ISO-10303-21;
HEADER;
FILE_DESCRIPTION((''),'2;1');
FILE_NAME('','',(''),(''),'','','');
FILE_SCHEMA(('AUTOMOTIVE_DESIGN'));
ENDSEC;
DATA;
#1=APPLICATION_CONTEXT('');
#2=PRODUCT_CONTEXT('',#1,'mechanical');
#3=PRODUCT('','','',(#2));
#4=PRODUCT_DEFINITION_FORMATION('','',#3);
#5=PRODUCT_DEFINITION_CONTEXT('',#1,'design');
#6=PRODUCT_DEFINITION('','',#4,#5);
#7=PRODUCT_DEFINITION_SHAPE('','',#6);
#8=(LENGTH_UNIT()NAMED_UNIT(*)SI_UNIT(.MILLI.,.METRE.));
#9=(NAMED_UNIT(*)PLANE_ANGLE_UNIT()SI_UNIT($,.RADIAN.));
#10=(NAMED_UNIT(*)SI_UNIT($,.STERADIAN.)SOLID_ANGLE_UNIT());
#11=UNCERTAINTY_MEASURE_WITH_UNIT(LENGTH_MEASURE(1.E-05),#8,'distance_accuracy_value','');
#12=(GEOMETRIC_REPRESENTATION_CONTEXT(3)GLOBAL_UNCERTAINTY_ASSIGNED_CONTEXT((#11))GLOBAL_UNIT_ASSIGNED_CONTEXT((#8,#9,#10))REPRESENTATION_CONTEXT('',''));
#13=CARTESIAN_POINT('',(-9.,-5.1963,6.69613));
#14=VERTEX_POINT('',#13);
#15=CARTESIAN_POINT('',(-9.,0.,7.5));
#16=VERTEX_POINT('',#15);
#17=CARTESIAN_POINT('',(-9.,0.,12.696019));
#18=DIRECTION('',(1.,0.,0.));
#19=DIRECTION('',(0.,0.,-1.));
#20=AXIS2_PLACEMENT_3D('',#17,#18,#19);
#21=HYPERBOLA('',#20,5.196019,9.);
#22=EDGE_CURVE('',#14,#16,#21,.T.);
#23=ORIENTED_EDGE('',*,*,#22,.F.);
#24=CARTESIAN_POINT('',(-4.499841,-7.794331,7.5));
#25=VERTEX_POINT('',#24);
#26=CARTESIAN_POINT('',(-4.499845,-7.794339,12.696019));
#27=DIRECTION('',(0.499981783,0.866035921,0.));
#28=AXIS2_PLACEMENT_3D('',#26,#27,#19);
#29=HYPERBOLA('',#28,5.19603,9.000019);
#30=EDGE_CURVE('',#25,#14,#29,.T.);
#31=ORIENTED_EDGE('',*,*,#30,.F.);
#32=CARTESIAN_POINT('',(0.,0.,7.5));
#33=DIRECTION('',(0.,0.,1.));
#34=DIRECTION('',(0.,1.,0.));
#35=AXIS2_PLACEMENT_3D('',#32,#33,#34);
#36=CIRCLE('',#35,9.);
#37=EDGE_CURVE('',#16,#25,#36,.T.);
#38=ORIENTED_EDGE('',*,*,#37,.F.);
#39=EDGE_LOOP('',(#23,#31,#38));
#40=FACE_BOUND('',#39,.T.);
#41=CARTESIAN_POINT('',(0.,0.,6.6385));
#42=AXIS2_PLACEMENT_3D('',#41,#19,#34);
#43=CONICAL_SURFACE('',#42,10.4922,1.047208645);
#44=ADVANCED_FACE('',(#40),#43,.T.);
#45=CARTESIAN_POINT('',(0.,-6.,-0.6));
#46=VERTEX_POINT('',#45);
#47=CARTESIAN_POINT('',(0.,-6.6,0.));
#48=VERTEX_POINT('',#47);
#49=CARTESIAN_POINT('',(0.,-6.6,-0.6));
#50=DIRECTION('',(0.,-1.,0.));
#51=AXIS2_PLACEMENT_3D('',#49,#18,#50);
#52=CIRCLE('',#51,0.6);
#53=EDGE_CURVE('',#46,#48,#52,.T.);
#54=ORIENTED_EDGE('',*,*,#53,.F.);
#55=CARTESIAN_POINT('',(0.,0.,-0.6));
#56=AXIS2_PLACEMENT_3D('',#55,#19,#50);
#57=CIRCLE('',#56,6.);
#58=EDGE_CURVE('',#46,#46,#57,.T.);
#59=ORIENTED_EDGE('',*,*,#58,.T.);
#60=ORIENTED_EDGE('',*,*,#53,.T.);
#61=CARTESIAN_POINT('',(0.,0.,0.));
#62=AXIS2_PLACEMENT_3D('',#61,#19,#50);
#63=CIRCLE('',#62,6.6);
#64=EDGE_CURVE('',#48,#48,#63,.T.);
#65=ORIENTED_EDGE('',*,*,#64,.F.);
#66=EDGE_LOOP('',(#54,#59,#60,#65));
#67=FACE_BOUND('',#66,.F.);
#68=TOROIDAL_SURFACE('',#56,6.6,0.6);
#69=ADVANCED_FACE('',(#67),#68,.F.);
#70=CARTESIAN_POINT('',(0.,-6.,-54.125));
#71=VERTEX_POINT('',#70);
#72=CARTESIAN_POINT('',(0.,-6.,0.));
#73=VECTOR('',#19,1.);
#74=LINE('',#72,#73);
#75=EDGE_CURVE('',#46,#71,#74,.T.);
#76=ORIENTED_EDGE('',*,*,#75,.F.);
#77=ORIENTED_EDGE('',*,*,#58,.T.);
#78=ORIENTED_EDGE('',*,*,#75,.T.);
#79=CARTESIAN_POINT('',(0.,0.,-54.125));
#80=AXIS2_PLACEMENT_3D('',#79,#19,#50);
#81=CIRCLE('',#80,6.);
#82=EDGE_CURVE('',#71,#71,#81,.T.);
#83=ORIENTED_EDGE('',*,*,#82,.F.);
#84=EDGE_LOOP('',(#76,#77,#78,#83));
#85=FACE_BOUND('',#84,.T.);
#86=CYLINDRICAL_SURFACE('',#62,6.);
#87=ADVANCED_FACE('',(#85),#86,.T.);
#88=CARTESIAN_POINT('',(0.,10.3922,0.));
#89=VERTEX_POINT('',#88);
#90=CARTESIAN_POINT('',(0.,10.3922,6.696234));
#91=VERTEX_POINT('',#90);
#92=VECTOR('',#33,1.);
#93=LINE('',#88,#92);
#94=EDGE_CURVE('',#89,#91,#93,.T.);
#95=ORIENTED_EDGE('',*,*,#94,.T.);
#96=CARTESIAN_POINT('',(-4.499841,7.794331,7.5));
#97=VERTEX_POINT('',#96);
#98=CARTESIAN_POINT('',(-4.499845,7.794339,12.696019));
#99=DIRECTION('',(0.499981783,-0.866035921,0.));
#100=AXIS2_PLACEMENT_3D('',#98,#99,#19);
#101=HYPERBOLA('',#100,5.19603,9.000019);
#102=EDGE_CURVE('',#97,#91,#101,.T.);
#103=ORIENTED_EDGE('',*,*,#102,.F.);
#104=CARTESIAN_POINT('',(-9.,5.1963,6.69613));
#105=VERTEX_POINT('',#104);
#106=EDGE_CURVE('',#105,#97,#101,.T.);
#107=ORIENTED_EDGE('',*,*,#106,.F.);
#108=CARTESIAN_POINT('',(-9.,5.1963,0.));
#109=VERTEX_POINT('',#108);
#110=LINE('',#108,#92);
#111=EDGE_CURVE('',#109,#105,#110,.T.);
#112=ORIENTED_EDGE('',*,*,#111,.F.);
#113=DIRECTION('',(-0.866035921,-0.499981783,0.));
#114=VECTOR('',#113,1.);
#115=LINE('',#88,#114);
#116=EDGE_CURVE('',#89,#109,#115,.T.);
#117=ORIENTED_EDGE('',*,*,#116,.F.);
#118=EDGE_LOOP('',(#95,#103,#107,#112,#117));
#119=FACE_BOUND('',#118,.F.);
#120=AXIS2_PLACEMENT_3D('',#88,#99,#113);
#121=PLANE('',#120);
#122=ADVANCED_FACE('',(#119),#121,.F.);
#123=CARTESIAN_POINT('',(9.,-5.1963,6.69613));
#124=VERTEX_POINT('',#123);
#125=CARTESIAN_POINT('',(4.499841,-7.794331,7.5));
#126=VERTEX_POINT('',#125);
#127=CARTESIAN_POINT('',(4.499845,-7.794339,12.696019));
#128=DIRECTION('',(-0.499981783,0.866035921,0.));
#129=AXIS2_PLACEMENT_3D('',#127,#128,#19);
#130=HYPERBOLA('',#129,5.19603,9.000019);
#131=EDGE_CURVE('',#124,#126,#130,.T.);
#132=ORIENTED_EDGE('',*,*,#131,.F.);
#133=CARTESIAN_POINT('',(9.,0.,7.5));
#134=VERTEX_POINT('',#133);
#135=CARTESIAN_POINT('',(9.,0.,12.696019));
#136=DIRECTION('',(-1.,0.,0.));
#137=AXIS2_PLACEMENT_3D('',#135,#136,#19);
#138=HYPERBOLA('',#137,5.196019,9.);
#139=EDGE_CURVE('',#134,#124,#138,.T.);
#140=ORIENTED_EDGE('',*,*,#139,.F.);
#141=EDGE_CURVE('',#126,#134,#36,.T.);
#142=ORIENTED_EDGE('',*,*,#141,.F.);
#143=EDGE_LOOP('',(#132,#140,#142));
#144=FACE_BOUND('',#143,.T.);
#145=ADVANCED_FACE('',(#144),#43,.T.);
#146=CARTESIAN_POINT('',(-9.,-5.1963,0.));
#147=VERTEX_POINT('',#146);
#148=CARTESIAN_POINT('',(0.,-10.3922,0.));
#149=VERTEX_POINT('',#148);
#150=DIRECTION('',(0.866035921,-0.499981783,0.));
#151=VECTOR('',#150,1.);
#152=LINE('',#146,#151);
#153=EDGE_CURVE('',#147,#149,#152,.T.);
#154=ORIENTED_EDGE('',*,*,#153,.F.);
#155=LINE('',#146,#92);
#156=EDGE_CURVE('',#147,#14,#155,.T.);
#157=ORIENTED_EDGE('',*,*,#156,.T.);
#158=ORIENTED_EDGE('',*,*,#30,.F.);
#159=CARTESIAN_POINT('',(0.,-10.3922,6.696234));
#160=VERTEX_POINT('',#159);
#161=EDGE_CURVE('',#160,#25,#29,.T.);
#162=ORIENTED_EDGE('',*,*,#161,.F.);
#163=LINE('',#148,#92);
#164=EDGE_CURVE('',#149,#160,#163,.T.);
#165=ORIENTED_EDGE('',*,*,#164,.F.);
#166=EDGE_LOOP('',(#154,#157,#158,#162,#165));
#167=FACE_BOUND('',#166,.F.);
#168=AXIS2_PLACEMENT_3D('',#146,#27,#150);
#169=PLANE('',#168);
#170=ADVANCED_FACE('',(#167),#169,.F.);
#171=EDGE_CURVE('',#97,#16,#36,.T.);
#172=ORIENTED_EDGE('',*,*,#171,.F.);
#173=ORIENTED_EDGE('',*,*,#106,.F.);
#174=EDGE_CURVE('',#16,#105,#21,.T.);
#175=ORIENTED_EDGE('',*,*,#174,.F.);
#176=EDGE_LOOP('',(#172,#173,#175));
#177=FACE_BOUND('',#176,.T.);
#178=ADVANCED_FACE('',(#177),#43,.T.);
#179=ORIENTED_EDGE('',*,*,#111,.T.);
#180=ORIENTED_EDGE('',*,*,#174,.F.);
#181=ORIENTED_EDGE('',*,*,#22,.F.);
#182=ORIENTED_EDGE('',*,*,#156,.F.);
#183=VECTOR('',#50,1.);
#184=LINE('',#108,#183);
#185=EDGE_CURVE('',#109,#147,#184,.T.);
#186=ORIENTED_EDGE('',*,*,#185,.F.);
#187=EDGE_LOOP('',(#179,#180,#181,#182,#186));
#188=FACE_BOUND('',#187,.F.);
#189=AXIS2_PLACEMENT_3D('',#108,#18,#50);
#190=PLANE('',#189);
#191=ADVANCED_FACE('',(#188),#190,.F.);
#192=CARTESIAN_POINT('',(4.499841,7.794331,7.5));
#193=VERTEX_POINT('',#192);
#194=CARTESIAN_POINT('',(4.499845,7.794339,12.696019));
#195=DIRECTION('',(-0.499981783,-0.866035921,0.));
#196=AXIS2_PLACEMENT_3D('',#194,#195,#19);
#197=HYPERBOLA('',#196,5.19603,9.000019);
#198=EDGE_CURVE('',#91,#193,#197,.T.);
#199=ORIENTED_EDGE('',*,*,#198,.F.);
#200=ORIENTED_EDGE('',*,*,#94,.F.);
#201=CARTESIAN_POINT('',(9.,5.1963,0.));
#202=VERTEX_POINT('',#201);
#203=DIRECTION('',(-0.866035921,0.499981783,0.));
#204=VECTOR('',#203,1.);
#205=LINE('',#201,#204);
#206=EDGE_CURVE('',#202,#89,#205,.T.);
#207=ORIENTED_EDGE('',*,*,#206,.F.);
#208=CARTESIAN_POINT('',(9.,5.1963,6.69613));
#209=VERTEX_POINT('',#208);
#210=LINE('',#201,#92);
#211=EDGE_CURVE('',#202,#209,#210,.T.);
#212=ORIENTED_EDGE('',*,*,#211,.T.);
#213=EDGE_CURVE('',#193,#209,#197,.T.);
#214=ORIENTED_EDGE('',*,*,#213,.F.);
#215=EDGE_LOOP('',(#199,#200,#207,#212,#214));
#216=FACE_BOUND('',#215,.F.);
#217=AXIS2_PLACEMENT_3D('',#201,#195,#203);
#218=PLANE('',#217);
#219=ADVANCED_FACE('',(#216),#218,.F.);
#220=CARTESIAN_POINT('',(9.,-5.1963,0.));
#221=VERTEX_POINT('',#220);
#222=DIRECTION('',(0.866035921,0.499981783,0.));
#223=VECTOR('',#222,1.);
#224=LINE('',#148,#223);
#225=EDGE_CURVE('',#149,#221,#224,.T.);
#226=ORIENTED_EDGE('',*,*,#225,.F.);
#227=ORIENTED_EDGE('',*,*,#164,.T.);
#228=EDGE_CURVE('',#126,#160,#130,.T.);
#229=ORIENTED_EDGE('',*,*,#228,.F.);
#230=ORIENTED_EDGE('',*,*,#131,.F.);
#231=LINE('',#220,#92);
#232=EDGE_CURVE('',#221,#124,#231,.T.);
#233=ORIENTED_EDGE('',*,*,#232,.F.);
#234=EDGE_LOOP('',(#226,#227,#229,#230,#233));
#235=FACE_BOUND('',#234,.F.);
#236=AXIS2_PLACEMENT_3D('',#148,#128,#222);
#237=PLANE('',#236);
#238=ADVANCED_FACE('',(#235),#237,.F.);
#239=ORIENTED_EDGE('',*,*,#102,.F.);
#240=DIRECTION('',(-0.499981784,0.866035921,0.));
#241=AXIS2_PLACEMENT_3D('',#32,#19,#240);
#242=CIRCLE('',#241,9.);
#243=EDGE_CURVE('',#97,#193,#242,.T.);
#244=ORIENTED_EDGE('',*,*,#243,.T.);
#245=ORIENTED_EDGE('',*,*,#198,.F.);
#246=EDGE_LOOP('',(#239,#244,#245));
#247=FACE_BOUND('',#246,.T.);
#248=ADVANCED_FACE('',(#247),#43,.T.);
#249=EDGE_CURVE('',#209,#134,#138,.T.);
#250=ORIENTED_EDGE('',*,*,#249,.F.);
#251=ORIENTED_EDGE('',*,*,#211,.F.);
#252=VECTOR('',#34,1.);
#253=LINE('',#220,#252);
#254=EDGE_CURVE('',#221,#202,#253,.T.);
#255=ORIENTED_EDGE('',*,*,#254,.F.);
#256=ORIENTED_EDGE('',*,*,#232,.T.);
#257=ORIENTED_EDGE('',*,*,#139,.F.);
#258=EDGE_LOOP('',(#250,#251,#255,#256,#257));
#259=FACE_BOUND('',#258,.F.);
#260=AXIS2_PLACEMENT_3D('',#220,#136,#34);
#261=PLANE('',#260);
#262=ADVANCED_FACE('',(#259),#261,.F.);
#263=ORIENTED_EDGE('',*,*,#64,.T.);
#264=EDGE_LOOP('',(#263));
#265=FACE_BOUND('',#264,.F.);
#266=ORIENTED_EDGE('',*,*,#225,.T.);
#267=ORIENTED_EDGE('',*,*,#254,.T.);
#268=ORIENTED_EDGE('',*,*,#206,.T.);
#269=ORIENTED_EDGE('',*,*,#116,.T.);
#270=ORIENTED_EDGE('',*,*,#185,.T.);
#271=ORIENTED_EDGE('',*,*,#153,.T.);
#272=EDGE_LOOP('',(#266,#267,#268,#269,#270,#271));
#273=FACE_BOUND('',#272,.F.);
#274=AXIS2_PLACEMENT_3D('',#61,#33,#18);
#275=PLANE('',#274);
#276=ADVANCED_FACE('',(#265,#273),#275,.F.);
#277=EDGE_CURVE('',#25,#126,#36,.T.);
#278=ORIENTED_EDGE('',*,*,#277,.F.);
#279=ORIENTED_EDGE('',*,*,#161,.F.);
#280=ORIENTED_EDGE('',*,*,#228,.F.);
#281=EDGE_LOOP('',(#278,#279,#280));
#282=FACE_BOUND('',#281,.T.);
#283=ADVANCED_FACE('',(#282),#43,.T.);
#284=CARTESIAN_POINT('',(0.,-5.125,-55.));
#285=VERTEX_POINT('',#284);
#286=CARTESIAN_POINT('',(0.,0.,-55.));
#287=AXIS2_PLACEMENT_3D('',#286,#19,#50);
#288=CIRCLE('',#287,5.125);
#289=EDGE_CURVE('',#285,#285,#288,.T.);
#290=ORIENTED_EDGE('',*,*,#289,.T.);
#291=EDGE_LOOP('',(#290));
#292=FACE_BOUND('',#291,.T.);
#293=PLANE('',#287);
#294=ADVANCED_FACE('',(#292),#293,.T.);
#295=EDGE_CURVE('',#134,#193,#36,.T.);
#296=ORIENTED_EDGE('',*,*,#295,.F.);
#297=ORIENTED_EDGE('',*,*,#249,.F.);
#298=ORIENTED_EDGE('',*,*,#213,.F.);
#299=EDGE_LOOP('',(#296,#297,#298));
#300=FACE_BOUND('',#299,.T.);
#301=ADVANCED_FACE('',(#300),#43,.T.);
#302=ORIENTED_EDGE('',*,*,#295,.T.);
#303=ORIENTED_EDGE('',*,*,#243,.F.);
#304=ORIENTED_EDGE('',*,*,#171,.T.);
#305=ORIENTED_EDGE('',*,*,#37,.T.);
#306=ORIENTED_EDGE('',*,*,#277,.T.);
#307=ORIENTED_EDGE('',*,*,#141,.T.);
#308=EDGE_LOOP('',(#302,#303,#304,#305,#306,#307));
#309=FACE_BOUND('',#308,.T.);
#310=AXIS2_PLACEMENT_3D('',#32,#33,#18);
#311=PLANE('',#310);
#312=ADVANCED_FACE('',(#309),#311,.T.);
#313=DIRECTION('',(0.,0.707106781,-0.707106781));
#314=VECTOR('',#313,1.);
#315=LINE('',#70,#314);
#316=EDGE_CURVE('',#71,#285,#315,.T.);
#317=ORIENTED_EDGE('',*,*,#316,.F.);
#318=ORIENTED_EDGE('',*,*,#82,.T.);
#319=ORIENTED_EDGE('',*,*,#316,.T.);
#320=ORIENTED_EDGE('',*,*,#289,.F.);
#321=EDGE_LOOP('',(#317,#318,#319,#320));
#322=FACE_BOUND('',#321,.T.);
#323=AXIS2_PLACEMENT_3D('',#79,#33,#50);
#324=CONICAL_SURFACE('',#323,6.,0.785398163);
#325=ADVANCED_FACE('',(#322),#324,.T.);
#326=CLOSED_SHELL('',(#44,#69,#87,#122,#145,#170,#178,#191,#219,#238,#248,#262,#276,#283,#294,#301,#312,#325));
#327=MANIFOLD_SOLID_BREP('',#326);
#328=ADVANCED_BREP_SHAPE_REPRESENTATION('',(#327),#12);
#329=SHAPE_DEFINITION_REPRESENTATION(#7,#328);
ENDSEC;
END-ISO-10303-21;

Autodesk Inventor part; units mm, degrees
ref_plane "WorkPlane1" through (0, 0, 0) normal (0, 0, 1) x (1, 0, 0)
sketch "Skizze1" plane through (0, 0, 0) normal (0, 0, 1) x (1, 0, 0)
  point P0 (0, 0)
sketch "Skizze2" plane through (0, 0, 0) normal (0, 0, 1) x (1, 0, 0)
  line L0 (-9, 5.1963) -> (-9, -5.1963)
  line L1 (0, 10.3922) -> (-9, 5.1963)
  line L2 (9, 5.1963) -> (0, 10.3922)
  line L3 (9, -5.1963) -> (9, 5.1963)
  line L4 (0, -10.3922) -> (9, -5.1963)
  line L5 (-9, -5.1963) -> (0, -10.3922)
  circle A0 centre (0, 0) radius 9 construction
  dimension "d1" = 18
  dimension "d29" = 0
  dimension "d30" = 0
extrude "Extrusion1" add sketch "Skizze2" along normal blind 7.5
sketch "Skizze3" plane through (0, 0, 0) normal (1, 0, 0) x (0, 1, 0)
  line L0 (9, 7.5) -> (10.4922, 7.5)
  line L1 (10.4922, 6.6385) -> (9, 7.5)
  line L2 (10.4922, 7.5) -> (10.4922, 6.6385)
  line L3 (0, -1.5) -> (0, 9) projected
  line L4 (10.3922, 0) -> (10.3922, 7.5) projected
  dimension "d25" = 0.1
  dimension "d26" = 0
  dimension "d27" = 60
  dimension "d28" = 9
revolve "Drehung1" cut sketch "Skizze3" angle 360 about axis through (0, 0, -10) along (0, 0, 1)
sketch "Skizze4" plane through (0, 0, 0) normal (1, 0, 0) x (0, 1, 0)
  line L0 (0, -55) -> (0, 0)
  line L1 (-6, -55) -> (0, -55)
  line L2 (-6, 0) -> (-6, -55)
  line L3 (0, 0) -> (-6, 0)
  line L4 (0, -55) -> (0, 0)
  line L5 (-7.2, 0) -> (1.2, 0) projected
  line L6 (0, -66) -> (0, 11) projected
  dimension "d18" = 6
  dimension "d20" = 55
  dimension "d33" = 0
  dimension "d34" = 0
revolve "Drehung2" add sketch "Skizze4" angle 360 about axis through (0, 0, -55) along (0, 0, -1)
chamfer "Fase1" distance 0.875 angle 45 1 edges at (0, 6, -55)
fillet "Rundung1" radius 0.6 1 edges at (0, 6, 0)
thread "Gewinde1" size "M12x1.75" class "6g" standard "ISO Metric profile" length 30
ref_plane "MSC_PF1" through (0, 0, 0) normal (1, 0, 0) x (0, 1, 0)
ref_plane "MSC_PT1" through (0, 0, 0) normal (0, 0, -1) x (-1, 0, 0)
equation "\"d22\" = 0.5 * PTC"
equation "\"d23\" = 0.5 * PTC"
equation "\"d1\" = ParS"
equation "\"d6\" = ParK"
equation "\"d24\" = r"
equation "\"d28\" = 0.5 * ParS"
equation "\"d18\" = 0.5 * NND"
equation "\"d20\" = NLG"
equation "\"NND\" = 12"
equation "\"NLG\" = 55"
equation "\"PTC\" = 1.75"
equation "\"ParK\" = 7.5"
equation "\"ParS\" = 18"
equation "\"msp_es\" = 0.577367 * ParS"
equation "\"r\" = 0.6"
equation "\"THREADDIA\" = NND"
equation "\"K1\" = 4.94"
properties part number "DIN EN ISO 4016 - M12x55" material "Stahl"
